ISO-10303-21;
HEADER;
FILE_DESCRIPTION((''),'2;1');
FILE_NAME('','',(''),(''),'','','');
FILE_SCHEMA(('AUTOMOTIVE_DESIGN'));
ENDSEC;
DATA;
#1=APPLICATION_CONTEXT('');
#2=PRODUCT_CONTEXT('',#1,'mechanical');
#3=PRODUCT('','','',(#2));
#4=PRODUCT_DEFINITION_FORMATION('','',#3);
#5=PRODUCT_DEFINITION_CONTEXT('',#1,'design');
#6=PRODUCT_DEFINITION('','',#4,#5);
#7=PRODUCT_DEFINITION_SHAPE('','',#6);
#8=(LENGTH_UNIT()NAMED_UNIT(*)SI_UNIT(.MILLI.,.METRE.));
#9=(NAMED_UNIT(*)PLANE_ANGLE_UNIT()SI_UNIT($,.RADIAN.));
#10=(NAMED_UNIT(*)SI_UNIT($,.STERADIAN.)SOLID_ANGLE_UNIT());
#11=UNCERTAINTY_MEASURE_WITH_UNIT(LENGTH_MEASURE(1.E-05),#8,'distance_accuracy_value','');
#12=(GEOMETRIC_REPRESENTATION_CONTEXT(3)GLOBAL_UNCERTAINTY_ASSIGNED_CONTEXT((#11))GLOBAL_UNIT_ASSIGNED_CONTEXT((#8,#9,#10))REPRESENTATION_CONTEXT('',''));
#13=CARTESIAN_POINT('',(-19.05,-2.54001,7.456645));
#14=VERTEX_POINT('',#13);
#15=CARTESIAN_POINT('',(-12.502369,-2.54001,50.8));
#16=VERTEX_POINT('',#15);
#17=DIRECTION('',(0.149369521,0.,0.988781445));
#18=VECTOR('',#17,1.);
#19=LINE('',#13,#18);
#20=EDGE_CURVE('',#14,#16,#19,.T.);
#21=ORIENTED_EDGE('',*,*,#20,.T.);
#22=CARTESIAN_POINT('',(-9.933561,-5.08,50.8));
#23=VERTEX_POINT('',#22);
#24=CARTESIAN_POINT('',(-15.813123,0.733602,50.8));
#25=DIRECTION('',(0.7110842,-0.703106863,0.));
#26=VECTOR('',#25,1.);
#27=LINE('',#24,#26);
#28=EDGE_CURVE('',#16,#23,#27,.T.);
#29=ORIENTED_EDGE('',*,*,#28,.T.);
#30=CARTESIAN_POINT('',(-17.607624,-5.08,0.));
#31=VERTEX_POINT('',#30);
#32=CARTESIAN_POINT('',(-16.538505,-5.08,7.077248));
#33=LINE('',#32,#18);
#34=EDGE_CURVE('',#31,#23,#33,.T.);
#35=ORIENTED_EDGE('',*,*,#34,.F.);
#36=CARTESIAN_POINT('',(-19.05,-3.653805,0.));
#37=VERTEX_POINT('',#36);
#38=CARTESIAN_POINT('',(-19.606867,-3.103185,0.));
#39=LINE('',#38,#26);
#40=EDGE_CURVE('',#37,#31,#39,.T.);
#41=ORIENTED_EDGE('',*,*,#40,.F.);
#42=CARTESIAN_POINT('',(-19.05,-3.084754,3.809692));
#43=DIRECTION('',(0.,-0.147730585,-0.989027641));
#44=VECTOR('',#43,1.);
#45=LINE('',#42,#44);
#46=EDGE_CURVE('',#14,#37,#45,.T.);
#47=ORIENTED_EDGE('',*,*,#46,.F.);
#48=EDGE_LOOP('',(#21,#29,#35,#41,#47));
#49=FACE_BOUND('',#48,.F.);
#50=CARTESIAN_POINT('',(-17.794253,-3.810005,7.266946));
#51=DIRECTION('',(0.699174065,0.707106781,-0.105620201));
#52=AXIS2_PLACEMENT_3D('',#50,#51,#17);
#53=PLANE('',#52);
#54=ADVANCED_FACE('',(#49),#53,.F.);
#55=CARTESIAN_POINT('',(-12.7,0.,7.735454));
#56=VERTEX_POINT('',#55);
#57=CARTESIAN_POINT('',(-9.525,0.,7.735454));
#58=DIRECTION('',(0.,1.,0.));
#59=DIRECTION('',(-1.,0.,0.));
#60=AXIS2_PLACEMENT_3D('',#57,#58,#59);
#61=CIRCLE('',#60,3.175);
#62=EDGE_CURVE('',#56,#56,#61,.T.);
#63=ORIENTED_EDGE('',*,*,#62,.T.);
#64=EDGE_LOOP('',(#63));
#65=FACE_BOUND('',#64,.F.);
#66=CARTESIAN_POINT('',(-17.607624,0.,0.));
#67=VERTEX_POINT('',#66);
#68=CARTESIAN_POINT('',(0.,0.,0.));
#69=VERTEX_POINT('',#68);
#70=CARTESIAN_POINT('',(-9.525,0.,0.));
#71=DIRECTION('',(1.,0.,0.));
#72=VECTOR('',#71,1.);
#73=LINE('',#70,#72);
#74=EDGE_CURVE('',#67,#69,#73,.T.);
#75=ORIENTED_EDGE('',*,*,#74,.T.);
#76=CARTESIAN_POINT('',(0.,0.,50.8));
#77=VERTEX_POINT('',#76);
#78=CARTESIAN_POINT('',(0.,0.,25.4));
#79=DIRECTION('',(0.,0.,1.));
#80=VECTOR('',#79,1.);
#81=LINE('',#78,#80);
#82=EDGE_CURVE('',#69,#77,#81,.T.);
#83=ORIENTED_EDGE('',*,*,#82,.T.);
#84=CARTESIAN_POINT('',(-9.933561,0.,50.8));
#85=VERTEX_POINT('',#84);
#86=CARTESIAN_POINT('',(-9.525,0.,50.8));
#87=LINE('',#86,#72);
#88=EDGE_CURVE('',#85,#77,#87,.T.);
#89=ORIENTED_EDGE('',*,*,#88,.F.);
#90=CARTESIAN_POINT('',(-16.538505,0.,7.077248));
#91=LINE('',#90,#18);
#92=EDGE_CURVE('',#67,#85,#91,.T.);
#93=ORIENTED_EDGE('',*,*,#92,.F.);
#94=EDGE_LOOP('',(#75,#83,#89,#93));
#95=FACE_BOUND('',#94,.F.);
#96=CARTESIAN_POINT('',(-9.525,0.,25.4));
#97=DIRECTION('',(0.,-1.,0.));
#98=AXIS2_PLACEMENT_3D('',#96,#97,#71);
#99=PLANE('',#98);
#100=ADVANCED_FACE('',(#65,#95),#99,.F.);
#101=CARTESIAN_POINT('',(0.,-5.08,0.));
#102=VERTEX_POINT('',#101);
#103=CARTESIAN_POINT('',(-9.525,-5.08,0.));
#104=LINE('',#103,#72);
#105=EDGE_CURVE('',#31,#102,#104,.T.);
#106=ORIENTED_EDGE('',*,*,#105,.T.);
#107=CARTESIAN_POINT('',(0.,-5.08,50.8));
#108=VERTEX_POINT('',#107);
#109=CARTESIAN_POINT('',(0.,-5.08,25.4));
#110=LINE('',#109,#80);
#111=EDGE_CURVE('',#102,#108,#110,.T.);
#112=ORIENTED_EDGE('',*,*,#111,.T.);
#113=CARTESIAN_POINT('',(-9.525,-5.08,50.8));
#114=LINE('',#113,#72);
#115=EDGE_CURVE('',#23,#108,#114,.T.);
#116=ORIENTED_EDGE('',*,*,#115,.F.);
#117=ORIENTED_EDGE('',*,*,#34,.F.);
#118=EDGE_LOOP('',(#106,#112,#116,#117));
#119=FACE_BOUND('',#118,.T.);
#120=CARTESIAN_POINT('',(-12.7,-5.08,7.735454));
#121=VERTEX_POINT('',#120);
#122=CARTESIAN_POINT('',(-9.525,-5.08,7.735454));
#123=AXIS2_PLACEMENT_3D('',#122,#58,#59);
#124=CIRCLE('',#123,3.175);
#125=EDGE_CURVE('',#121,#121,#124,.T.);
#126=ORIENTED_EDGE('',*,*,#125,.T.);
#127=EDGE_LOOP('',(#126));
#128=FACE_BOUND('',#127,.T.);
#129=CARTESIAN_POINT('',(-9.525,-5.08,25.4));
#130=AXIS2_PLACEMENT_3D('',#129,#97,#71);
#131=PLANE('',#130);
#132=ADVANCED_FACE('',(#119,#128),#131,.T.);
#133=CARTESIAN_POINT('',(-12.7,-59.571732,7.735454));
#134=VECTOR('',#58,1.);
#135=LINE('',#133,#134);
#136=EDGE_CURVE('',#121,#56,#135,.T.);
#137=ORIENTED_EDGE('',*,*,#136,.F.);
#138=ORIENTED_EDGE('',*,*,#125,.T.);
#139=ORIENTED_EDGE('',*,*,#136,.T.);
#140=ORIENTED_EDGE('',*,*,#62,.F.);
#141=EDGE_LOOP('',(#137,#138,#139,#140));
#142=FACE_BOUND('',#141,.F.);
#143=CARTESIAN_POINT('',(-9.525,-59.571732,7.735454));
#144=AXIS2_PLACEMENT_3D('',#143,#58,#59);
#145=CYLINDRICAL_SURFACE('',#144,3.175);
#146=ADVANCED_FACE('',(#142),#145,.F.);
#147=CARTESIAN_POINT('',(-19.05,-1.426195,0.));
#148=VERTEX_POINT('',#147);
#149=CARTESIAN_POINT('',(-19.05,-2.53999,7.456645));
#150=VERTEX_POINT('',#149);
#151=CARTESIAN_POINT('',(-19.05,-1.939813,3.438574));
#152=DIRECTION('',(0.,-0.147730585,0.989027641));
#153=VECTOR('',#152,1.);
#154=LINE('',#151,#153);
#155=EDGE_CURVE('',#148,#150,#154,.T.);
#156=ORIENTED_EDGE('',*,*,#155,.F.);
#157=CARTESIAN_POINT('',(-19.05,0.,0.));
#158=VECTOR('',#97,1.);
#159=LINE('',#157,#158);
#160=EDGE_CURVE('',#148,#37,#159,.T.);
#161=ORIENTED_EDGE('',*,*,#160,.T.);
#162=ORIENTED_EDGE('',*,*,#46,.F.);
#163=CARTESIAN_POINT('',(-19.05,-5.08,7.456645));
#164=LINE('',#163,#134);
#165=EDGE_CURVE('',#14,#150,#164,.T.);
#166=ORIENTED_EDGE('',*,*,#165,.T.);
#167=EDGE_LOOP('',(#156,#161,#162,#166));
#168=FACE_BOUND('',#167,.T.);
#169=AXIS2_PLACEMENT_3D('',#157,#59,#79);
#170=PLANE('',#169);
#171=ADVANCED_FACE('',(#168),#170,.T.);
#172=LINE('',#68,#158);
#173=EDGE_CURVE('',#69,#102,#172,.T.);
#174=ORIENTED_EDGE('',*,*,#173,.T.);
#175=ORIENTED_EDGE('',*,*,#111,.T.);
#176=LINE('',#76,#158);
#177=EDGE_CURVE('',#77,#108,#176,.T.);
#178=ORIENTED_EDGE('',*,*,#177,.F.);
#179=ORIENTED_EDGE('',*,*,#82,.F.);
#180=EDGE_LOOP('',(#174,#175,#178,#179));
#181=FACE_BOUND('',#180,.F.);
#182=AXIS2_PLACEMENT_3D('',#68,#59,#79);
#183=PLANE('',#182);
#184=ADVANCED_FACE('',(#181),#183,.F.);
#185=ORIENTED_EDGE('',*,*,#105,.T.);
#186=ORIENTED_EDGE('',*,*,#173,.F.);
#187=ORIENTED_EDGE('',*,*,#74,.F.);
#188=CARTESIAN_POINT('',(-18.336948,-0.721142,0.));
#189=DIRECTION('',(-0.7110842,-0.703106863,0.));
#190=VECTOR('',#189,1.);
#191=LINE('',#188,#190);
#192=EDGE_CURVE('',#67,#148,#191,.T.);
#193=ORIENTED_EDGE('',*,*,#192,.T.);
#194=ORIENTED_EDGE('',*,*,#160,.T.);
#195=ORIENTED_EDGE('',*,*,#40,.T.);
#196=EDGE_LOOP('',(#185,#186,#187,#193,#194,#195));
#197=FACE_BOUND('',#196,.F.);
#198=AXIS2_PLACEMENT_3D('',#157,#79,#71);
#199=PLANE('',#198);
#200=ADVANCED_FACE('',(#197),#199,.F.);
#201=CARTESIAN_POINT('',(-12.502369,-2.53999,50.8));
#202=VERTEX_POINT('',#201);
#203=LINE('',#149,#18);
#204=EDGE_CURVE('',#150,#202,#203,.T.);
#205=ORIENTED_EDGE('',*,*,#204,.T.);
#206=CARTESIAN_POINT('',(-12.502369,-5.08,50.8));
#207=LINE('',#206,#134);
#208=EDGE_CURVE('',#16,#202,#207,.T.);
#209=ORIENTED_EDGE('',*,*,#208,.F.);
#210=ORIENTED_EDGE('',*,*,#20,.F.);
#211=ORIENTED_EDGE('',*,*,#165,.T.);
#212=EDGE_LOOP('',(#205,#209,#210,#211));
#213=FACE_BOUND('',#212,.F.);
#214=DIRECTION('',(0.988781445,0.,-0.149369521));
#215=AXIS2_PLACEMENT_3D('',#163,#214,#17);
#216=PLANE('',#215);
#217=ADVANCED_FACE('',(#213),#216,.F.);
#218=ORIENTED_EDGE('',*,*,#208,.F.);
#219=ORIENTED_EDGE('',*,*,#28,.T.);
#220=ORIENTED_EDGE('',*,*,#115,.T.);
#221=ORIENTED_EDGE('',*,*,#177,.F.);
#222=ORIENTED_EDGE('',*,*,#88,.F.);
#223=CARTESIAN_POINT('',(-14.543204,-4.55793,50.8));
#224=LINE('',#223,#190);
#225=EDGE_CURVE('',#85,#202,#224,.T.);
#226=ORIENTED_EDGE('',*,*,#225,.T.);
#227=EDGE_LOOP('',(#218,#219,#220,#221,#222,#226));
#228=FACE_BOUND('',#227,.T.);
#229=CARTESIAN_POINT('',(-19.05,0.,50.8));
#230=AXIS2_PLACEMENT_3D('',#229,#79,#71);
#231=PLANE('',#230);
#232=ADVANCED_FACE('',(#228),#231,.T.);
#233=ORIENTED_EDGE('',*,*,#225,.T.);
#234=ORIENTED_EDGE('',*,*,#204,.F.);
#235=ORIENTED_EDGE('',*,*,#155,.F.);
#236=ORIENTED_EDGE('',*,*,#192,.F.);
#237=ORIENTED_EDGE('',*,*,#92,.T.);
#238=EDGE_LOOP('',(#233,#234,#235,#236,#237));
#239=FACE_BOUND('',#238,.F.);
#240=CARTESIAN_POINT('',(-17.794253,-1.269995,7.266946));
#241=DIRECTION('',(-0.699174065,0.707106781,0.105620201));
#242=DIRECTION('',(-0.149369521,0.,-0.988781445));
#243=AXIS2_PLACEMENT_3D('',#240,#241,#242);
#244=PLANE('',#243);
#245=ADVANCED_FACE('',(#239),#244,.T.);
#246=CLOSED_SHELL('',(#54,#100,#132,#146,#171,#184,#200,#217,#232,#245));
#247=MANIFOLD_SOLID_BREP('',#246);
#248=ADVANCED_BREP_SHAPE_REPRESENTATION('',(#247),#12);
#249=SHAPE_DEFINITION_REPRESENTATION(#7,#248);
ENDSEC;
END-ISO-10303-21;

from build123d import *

# Parameters (mm, degrees)
F0_W     = 19.05
F0_H     = 50.8
F1_DEPTH = 5.08
F3_D     = 6.35
F5_DEPTH = 25.4
F6_SIZE  = 2.53999


# Not quite as in the source:
# - a fillet or chamfer is up to 0.001 mm smaller than in the source, because OpenCascade refuses the exact size


with BuildPart() as f1:
    # F0 (on Front) → F1 (new body)
    with BuildSketch(Plane.XZ):
        with Locations((-9.525, 25.4)):
            Rectangle(F0_W, F0_H)
    extrude(amount=F1_DEPTH)

    # F3 (through all)
    with Locations(Plane.XZ.offset(5.08)):
        with Locations((-9.525, 7.7354544774)):
            Hole(F3_D / 2)

    # F4 (on face) → F5 (cut)
    with BuildSketch(Plane.XZ.offset(5.08)):
        Polygon((-19.05, 7.4566449039), (-12.5023688375, 50.8), (-19.05, 50.8), align=None)
    extrude(amount=-F5_DEPTH, mode=Mode.SUBTRACT)

    # F6 (size 2.54 in the source; OpenCascade refuses exactly that, so slightly less here)
    f6_edges = [f1.edges().sort_by_distance(p)[0] for p in [
        (-15.776184, -5.08, 29.128322),
        (-15.776184, 0, 29.128322),
    ]]
    chamfer(f6_edges, length=F6_SIZE)


solid = f1.part
